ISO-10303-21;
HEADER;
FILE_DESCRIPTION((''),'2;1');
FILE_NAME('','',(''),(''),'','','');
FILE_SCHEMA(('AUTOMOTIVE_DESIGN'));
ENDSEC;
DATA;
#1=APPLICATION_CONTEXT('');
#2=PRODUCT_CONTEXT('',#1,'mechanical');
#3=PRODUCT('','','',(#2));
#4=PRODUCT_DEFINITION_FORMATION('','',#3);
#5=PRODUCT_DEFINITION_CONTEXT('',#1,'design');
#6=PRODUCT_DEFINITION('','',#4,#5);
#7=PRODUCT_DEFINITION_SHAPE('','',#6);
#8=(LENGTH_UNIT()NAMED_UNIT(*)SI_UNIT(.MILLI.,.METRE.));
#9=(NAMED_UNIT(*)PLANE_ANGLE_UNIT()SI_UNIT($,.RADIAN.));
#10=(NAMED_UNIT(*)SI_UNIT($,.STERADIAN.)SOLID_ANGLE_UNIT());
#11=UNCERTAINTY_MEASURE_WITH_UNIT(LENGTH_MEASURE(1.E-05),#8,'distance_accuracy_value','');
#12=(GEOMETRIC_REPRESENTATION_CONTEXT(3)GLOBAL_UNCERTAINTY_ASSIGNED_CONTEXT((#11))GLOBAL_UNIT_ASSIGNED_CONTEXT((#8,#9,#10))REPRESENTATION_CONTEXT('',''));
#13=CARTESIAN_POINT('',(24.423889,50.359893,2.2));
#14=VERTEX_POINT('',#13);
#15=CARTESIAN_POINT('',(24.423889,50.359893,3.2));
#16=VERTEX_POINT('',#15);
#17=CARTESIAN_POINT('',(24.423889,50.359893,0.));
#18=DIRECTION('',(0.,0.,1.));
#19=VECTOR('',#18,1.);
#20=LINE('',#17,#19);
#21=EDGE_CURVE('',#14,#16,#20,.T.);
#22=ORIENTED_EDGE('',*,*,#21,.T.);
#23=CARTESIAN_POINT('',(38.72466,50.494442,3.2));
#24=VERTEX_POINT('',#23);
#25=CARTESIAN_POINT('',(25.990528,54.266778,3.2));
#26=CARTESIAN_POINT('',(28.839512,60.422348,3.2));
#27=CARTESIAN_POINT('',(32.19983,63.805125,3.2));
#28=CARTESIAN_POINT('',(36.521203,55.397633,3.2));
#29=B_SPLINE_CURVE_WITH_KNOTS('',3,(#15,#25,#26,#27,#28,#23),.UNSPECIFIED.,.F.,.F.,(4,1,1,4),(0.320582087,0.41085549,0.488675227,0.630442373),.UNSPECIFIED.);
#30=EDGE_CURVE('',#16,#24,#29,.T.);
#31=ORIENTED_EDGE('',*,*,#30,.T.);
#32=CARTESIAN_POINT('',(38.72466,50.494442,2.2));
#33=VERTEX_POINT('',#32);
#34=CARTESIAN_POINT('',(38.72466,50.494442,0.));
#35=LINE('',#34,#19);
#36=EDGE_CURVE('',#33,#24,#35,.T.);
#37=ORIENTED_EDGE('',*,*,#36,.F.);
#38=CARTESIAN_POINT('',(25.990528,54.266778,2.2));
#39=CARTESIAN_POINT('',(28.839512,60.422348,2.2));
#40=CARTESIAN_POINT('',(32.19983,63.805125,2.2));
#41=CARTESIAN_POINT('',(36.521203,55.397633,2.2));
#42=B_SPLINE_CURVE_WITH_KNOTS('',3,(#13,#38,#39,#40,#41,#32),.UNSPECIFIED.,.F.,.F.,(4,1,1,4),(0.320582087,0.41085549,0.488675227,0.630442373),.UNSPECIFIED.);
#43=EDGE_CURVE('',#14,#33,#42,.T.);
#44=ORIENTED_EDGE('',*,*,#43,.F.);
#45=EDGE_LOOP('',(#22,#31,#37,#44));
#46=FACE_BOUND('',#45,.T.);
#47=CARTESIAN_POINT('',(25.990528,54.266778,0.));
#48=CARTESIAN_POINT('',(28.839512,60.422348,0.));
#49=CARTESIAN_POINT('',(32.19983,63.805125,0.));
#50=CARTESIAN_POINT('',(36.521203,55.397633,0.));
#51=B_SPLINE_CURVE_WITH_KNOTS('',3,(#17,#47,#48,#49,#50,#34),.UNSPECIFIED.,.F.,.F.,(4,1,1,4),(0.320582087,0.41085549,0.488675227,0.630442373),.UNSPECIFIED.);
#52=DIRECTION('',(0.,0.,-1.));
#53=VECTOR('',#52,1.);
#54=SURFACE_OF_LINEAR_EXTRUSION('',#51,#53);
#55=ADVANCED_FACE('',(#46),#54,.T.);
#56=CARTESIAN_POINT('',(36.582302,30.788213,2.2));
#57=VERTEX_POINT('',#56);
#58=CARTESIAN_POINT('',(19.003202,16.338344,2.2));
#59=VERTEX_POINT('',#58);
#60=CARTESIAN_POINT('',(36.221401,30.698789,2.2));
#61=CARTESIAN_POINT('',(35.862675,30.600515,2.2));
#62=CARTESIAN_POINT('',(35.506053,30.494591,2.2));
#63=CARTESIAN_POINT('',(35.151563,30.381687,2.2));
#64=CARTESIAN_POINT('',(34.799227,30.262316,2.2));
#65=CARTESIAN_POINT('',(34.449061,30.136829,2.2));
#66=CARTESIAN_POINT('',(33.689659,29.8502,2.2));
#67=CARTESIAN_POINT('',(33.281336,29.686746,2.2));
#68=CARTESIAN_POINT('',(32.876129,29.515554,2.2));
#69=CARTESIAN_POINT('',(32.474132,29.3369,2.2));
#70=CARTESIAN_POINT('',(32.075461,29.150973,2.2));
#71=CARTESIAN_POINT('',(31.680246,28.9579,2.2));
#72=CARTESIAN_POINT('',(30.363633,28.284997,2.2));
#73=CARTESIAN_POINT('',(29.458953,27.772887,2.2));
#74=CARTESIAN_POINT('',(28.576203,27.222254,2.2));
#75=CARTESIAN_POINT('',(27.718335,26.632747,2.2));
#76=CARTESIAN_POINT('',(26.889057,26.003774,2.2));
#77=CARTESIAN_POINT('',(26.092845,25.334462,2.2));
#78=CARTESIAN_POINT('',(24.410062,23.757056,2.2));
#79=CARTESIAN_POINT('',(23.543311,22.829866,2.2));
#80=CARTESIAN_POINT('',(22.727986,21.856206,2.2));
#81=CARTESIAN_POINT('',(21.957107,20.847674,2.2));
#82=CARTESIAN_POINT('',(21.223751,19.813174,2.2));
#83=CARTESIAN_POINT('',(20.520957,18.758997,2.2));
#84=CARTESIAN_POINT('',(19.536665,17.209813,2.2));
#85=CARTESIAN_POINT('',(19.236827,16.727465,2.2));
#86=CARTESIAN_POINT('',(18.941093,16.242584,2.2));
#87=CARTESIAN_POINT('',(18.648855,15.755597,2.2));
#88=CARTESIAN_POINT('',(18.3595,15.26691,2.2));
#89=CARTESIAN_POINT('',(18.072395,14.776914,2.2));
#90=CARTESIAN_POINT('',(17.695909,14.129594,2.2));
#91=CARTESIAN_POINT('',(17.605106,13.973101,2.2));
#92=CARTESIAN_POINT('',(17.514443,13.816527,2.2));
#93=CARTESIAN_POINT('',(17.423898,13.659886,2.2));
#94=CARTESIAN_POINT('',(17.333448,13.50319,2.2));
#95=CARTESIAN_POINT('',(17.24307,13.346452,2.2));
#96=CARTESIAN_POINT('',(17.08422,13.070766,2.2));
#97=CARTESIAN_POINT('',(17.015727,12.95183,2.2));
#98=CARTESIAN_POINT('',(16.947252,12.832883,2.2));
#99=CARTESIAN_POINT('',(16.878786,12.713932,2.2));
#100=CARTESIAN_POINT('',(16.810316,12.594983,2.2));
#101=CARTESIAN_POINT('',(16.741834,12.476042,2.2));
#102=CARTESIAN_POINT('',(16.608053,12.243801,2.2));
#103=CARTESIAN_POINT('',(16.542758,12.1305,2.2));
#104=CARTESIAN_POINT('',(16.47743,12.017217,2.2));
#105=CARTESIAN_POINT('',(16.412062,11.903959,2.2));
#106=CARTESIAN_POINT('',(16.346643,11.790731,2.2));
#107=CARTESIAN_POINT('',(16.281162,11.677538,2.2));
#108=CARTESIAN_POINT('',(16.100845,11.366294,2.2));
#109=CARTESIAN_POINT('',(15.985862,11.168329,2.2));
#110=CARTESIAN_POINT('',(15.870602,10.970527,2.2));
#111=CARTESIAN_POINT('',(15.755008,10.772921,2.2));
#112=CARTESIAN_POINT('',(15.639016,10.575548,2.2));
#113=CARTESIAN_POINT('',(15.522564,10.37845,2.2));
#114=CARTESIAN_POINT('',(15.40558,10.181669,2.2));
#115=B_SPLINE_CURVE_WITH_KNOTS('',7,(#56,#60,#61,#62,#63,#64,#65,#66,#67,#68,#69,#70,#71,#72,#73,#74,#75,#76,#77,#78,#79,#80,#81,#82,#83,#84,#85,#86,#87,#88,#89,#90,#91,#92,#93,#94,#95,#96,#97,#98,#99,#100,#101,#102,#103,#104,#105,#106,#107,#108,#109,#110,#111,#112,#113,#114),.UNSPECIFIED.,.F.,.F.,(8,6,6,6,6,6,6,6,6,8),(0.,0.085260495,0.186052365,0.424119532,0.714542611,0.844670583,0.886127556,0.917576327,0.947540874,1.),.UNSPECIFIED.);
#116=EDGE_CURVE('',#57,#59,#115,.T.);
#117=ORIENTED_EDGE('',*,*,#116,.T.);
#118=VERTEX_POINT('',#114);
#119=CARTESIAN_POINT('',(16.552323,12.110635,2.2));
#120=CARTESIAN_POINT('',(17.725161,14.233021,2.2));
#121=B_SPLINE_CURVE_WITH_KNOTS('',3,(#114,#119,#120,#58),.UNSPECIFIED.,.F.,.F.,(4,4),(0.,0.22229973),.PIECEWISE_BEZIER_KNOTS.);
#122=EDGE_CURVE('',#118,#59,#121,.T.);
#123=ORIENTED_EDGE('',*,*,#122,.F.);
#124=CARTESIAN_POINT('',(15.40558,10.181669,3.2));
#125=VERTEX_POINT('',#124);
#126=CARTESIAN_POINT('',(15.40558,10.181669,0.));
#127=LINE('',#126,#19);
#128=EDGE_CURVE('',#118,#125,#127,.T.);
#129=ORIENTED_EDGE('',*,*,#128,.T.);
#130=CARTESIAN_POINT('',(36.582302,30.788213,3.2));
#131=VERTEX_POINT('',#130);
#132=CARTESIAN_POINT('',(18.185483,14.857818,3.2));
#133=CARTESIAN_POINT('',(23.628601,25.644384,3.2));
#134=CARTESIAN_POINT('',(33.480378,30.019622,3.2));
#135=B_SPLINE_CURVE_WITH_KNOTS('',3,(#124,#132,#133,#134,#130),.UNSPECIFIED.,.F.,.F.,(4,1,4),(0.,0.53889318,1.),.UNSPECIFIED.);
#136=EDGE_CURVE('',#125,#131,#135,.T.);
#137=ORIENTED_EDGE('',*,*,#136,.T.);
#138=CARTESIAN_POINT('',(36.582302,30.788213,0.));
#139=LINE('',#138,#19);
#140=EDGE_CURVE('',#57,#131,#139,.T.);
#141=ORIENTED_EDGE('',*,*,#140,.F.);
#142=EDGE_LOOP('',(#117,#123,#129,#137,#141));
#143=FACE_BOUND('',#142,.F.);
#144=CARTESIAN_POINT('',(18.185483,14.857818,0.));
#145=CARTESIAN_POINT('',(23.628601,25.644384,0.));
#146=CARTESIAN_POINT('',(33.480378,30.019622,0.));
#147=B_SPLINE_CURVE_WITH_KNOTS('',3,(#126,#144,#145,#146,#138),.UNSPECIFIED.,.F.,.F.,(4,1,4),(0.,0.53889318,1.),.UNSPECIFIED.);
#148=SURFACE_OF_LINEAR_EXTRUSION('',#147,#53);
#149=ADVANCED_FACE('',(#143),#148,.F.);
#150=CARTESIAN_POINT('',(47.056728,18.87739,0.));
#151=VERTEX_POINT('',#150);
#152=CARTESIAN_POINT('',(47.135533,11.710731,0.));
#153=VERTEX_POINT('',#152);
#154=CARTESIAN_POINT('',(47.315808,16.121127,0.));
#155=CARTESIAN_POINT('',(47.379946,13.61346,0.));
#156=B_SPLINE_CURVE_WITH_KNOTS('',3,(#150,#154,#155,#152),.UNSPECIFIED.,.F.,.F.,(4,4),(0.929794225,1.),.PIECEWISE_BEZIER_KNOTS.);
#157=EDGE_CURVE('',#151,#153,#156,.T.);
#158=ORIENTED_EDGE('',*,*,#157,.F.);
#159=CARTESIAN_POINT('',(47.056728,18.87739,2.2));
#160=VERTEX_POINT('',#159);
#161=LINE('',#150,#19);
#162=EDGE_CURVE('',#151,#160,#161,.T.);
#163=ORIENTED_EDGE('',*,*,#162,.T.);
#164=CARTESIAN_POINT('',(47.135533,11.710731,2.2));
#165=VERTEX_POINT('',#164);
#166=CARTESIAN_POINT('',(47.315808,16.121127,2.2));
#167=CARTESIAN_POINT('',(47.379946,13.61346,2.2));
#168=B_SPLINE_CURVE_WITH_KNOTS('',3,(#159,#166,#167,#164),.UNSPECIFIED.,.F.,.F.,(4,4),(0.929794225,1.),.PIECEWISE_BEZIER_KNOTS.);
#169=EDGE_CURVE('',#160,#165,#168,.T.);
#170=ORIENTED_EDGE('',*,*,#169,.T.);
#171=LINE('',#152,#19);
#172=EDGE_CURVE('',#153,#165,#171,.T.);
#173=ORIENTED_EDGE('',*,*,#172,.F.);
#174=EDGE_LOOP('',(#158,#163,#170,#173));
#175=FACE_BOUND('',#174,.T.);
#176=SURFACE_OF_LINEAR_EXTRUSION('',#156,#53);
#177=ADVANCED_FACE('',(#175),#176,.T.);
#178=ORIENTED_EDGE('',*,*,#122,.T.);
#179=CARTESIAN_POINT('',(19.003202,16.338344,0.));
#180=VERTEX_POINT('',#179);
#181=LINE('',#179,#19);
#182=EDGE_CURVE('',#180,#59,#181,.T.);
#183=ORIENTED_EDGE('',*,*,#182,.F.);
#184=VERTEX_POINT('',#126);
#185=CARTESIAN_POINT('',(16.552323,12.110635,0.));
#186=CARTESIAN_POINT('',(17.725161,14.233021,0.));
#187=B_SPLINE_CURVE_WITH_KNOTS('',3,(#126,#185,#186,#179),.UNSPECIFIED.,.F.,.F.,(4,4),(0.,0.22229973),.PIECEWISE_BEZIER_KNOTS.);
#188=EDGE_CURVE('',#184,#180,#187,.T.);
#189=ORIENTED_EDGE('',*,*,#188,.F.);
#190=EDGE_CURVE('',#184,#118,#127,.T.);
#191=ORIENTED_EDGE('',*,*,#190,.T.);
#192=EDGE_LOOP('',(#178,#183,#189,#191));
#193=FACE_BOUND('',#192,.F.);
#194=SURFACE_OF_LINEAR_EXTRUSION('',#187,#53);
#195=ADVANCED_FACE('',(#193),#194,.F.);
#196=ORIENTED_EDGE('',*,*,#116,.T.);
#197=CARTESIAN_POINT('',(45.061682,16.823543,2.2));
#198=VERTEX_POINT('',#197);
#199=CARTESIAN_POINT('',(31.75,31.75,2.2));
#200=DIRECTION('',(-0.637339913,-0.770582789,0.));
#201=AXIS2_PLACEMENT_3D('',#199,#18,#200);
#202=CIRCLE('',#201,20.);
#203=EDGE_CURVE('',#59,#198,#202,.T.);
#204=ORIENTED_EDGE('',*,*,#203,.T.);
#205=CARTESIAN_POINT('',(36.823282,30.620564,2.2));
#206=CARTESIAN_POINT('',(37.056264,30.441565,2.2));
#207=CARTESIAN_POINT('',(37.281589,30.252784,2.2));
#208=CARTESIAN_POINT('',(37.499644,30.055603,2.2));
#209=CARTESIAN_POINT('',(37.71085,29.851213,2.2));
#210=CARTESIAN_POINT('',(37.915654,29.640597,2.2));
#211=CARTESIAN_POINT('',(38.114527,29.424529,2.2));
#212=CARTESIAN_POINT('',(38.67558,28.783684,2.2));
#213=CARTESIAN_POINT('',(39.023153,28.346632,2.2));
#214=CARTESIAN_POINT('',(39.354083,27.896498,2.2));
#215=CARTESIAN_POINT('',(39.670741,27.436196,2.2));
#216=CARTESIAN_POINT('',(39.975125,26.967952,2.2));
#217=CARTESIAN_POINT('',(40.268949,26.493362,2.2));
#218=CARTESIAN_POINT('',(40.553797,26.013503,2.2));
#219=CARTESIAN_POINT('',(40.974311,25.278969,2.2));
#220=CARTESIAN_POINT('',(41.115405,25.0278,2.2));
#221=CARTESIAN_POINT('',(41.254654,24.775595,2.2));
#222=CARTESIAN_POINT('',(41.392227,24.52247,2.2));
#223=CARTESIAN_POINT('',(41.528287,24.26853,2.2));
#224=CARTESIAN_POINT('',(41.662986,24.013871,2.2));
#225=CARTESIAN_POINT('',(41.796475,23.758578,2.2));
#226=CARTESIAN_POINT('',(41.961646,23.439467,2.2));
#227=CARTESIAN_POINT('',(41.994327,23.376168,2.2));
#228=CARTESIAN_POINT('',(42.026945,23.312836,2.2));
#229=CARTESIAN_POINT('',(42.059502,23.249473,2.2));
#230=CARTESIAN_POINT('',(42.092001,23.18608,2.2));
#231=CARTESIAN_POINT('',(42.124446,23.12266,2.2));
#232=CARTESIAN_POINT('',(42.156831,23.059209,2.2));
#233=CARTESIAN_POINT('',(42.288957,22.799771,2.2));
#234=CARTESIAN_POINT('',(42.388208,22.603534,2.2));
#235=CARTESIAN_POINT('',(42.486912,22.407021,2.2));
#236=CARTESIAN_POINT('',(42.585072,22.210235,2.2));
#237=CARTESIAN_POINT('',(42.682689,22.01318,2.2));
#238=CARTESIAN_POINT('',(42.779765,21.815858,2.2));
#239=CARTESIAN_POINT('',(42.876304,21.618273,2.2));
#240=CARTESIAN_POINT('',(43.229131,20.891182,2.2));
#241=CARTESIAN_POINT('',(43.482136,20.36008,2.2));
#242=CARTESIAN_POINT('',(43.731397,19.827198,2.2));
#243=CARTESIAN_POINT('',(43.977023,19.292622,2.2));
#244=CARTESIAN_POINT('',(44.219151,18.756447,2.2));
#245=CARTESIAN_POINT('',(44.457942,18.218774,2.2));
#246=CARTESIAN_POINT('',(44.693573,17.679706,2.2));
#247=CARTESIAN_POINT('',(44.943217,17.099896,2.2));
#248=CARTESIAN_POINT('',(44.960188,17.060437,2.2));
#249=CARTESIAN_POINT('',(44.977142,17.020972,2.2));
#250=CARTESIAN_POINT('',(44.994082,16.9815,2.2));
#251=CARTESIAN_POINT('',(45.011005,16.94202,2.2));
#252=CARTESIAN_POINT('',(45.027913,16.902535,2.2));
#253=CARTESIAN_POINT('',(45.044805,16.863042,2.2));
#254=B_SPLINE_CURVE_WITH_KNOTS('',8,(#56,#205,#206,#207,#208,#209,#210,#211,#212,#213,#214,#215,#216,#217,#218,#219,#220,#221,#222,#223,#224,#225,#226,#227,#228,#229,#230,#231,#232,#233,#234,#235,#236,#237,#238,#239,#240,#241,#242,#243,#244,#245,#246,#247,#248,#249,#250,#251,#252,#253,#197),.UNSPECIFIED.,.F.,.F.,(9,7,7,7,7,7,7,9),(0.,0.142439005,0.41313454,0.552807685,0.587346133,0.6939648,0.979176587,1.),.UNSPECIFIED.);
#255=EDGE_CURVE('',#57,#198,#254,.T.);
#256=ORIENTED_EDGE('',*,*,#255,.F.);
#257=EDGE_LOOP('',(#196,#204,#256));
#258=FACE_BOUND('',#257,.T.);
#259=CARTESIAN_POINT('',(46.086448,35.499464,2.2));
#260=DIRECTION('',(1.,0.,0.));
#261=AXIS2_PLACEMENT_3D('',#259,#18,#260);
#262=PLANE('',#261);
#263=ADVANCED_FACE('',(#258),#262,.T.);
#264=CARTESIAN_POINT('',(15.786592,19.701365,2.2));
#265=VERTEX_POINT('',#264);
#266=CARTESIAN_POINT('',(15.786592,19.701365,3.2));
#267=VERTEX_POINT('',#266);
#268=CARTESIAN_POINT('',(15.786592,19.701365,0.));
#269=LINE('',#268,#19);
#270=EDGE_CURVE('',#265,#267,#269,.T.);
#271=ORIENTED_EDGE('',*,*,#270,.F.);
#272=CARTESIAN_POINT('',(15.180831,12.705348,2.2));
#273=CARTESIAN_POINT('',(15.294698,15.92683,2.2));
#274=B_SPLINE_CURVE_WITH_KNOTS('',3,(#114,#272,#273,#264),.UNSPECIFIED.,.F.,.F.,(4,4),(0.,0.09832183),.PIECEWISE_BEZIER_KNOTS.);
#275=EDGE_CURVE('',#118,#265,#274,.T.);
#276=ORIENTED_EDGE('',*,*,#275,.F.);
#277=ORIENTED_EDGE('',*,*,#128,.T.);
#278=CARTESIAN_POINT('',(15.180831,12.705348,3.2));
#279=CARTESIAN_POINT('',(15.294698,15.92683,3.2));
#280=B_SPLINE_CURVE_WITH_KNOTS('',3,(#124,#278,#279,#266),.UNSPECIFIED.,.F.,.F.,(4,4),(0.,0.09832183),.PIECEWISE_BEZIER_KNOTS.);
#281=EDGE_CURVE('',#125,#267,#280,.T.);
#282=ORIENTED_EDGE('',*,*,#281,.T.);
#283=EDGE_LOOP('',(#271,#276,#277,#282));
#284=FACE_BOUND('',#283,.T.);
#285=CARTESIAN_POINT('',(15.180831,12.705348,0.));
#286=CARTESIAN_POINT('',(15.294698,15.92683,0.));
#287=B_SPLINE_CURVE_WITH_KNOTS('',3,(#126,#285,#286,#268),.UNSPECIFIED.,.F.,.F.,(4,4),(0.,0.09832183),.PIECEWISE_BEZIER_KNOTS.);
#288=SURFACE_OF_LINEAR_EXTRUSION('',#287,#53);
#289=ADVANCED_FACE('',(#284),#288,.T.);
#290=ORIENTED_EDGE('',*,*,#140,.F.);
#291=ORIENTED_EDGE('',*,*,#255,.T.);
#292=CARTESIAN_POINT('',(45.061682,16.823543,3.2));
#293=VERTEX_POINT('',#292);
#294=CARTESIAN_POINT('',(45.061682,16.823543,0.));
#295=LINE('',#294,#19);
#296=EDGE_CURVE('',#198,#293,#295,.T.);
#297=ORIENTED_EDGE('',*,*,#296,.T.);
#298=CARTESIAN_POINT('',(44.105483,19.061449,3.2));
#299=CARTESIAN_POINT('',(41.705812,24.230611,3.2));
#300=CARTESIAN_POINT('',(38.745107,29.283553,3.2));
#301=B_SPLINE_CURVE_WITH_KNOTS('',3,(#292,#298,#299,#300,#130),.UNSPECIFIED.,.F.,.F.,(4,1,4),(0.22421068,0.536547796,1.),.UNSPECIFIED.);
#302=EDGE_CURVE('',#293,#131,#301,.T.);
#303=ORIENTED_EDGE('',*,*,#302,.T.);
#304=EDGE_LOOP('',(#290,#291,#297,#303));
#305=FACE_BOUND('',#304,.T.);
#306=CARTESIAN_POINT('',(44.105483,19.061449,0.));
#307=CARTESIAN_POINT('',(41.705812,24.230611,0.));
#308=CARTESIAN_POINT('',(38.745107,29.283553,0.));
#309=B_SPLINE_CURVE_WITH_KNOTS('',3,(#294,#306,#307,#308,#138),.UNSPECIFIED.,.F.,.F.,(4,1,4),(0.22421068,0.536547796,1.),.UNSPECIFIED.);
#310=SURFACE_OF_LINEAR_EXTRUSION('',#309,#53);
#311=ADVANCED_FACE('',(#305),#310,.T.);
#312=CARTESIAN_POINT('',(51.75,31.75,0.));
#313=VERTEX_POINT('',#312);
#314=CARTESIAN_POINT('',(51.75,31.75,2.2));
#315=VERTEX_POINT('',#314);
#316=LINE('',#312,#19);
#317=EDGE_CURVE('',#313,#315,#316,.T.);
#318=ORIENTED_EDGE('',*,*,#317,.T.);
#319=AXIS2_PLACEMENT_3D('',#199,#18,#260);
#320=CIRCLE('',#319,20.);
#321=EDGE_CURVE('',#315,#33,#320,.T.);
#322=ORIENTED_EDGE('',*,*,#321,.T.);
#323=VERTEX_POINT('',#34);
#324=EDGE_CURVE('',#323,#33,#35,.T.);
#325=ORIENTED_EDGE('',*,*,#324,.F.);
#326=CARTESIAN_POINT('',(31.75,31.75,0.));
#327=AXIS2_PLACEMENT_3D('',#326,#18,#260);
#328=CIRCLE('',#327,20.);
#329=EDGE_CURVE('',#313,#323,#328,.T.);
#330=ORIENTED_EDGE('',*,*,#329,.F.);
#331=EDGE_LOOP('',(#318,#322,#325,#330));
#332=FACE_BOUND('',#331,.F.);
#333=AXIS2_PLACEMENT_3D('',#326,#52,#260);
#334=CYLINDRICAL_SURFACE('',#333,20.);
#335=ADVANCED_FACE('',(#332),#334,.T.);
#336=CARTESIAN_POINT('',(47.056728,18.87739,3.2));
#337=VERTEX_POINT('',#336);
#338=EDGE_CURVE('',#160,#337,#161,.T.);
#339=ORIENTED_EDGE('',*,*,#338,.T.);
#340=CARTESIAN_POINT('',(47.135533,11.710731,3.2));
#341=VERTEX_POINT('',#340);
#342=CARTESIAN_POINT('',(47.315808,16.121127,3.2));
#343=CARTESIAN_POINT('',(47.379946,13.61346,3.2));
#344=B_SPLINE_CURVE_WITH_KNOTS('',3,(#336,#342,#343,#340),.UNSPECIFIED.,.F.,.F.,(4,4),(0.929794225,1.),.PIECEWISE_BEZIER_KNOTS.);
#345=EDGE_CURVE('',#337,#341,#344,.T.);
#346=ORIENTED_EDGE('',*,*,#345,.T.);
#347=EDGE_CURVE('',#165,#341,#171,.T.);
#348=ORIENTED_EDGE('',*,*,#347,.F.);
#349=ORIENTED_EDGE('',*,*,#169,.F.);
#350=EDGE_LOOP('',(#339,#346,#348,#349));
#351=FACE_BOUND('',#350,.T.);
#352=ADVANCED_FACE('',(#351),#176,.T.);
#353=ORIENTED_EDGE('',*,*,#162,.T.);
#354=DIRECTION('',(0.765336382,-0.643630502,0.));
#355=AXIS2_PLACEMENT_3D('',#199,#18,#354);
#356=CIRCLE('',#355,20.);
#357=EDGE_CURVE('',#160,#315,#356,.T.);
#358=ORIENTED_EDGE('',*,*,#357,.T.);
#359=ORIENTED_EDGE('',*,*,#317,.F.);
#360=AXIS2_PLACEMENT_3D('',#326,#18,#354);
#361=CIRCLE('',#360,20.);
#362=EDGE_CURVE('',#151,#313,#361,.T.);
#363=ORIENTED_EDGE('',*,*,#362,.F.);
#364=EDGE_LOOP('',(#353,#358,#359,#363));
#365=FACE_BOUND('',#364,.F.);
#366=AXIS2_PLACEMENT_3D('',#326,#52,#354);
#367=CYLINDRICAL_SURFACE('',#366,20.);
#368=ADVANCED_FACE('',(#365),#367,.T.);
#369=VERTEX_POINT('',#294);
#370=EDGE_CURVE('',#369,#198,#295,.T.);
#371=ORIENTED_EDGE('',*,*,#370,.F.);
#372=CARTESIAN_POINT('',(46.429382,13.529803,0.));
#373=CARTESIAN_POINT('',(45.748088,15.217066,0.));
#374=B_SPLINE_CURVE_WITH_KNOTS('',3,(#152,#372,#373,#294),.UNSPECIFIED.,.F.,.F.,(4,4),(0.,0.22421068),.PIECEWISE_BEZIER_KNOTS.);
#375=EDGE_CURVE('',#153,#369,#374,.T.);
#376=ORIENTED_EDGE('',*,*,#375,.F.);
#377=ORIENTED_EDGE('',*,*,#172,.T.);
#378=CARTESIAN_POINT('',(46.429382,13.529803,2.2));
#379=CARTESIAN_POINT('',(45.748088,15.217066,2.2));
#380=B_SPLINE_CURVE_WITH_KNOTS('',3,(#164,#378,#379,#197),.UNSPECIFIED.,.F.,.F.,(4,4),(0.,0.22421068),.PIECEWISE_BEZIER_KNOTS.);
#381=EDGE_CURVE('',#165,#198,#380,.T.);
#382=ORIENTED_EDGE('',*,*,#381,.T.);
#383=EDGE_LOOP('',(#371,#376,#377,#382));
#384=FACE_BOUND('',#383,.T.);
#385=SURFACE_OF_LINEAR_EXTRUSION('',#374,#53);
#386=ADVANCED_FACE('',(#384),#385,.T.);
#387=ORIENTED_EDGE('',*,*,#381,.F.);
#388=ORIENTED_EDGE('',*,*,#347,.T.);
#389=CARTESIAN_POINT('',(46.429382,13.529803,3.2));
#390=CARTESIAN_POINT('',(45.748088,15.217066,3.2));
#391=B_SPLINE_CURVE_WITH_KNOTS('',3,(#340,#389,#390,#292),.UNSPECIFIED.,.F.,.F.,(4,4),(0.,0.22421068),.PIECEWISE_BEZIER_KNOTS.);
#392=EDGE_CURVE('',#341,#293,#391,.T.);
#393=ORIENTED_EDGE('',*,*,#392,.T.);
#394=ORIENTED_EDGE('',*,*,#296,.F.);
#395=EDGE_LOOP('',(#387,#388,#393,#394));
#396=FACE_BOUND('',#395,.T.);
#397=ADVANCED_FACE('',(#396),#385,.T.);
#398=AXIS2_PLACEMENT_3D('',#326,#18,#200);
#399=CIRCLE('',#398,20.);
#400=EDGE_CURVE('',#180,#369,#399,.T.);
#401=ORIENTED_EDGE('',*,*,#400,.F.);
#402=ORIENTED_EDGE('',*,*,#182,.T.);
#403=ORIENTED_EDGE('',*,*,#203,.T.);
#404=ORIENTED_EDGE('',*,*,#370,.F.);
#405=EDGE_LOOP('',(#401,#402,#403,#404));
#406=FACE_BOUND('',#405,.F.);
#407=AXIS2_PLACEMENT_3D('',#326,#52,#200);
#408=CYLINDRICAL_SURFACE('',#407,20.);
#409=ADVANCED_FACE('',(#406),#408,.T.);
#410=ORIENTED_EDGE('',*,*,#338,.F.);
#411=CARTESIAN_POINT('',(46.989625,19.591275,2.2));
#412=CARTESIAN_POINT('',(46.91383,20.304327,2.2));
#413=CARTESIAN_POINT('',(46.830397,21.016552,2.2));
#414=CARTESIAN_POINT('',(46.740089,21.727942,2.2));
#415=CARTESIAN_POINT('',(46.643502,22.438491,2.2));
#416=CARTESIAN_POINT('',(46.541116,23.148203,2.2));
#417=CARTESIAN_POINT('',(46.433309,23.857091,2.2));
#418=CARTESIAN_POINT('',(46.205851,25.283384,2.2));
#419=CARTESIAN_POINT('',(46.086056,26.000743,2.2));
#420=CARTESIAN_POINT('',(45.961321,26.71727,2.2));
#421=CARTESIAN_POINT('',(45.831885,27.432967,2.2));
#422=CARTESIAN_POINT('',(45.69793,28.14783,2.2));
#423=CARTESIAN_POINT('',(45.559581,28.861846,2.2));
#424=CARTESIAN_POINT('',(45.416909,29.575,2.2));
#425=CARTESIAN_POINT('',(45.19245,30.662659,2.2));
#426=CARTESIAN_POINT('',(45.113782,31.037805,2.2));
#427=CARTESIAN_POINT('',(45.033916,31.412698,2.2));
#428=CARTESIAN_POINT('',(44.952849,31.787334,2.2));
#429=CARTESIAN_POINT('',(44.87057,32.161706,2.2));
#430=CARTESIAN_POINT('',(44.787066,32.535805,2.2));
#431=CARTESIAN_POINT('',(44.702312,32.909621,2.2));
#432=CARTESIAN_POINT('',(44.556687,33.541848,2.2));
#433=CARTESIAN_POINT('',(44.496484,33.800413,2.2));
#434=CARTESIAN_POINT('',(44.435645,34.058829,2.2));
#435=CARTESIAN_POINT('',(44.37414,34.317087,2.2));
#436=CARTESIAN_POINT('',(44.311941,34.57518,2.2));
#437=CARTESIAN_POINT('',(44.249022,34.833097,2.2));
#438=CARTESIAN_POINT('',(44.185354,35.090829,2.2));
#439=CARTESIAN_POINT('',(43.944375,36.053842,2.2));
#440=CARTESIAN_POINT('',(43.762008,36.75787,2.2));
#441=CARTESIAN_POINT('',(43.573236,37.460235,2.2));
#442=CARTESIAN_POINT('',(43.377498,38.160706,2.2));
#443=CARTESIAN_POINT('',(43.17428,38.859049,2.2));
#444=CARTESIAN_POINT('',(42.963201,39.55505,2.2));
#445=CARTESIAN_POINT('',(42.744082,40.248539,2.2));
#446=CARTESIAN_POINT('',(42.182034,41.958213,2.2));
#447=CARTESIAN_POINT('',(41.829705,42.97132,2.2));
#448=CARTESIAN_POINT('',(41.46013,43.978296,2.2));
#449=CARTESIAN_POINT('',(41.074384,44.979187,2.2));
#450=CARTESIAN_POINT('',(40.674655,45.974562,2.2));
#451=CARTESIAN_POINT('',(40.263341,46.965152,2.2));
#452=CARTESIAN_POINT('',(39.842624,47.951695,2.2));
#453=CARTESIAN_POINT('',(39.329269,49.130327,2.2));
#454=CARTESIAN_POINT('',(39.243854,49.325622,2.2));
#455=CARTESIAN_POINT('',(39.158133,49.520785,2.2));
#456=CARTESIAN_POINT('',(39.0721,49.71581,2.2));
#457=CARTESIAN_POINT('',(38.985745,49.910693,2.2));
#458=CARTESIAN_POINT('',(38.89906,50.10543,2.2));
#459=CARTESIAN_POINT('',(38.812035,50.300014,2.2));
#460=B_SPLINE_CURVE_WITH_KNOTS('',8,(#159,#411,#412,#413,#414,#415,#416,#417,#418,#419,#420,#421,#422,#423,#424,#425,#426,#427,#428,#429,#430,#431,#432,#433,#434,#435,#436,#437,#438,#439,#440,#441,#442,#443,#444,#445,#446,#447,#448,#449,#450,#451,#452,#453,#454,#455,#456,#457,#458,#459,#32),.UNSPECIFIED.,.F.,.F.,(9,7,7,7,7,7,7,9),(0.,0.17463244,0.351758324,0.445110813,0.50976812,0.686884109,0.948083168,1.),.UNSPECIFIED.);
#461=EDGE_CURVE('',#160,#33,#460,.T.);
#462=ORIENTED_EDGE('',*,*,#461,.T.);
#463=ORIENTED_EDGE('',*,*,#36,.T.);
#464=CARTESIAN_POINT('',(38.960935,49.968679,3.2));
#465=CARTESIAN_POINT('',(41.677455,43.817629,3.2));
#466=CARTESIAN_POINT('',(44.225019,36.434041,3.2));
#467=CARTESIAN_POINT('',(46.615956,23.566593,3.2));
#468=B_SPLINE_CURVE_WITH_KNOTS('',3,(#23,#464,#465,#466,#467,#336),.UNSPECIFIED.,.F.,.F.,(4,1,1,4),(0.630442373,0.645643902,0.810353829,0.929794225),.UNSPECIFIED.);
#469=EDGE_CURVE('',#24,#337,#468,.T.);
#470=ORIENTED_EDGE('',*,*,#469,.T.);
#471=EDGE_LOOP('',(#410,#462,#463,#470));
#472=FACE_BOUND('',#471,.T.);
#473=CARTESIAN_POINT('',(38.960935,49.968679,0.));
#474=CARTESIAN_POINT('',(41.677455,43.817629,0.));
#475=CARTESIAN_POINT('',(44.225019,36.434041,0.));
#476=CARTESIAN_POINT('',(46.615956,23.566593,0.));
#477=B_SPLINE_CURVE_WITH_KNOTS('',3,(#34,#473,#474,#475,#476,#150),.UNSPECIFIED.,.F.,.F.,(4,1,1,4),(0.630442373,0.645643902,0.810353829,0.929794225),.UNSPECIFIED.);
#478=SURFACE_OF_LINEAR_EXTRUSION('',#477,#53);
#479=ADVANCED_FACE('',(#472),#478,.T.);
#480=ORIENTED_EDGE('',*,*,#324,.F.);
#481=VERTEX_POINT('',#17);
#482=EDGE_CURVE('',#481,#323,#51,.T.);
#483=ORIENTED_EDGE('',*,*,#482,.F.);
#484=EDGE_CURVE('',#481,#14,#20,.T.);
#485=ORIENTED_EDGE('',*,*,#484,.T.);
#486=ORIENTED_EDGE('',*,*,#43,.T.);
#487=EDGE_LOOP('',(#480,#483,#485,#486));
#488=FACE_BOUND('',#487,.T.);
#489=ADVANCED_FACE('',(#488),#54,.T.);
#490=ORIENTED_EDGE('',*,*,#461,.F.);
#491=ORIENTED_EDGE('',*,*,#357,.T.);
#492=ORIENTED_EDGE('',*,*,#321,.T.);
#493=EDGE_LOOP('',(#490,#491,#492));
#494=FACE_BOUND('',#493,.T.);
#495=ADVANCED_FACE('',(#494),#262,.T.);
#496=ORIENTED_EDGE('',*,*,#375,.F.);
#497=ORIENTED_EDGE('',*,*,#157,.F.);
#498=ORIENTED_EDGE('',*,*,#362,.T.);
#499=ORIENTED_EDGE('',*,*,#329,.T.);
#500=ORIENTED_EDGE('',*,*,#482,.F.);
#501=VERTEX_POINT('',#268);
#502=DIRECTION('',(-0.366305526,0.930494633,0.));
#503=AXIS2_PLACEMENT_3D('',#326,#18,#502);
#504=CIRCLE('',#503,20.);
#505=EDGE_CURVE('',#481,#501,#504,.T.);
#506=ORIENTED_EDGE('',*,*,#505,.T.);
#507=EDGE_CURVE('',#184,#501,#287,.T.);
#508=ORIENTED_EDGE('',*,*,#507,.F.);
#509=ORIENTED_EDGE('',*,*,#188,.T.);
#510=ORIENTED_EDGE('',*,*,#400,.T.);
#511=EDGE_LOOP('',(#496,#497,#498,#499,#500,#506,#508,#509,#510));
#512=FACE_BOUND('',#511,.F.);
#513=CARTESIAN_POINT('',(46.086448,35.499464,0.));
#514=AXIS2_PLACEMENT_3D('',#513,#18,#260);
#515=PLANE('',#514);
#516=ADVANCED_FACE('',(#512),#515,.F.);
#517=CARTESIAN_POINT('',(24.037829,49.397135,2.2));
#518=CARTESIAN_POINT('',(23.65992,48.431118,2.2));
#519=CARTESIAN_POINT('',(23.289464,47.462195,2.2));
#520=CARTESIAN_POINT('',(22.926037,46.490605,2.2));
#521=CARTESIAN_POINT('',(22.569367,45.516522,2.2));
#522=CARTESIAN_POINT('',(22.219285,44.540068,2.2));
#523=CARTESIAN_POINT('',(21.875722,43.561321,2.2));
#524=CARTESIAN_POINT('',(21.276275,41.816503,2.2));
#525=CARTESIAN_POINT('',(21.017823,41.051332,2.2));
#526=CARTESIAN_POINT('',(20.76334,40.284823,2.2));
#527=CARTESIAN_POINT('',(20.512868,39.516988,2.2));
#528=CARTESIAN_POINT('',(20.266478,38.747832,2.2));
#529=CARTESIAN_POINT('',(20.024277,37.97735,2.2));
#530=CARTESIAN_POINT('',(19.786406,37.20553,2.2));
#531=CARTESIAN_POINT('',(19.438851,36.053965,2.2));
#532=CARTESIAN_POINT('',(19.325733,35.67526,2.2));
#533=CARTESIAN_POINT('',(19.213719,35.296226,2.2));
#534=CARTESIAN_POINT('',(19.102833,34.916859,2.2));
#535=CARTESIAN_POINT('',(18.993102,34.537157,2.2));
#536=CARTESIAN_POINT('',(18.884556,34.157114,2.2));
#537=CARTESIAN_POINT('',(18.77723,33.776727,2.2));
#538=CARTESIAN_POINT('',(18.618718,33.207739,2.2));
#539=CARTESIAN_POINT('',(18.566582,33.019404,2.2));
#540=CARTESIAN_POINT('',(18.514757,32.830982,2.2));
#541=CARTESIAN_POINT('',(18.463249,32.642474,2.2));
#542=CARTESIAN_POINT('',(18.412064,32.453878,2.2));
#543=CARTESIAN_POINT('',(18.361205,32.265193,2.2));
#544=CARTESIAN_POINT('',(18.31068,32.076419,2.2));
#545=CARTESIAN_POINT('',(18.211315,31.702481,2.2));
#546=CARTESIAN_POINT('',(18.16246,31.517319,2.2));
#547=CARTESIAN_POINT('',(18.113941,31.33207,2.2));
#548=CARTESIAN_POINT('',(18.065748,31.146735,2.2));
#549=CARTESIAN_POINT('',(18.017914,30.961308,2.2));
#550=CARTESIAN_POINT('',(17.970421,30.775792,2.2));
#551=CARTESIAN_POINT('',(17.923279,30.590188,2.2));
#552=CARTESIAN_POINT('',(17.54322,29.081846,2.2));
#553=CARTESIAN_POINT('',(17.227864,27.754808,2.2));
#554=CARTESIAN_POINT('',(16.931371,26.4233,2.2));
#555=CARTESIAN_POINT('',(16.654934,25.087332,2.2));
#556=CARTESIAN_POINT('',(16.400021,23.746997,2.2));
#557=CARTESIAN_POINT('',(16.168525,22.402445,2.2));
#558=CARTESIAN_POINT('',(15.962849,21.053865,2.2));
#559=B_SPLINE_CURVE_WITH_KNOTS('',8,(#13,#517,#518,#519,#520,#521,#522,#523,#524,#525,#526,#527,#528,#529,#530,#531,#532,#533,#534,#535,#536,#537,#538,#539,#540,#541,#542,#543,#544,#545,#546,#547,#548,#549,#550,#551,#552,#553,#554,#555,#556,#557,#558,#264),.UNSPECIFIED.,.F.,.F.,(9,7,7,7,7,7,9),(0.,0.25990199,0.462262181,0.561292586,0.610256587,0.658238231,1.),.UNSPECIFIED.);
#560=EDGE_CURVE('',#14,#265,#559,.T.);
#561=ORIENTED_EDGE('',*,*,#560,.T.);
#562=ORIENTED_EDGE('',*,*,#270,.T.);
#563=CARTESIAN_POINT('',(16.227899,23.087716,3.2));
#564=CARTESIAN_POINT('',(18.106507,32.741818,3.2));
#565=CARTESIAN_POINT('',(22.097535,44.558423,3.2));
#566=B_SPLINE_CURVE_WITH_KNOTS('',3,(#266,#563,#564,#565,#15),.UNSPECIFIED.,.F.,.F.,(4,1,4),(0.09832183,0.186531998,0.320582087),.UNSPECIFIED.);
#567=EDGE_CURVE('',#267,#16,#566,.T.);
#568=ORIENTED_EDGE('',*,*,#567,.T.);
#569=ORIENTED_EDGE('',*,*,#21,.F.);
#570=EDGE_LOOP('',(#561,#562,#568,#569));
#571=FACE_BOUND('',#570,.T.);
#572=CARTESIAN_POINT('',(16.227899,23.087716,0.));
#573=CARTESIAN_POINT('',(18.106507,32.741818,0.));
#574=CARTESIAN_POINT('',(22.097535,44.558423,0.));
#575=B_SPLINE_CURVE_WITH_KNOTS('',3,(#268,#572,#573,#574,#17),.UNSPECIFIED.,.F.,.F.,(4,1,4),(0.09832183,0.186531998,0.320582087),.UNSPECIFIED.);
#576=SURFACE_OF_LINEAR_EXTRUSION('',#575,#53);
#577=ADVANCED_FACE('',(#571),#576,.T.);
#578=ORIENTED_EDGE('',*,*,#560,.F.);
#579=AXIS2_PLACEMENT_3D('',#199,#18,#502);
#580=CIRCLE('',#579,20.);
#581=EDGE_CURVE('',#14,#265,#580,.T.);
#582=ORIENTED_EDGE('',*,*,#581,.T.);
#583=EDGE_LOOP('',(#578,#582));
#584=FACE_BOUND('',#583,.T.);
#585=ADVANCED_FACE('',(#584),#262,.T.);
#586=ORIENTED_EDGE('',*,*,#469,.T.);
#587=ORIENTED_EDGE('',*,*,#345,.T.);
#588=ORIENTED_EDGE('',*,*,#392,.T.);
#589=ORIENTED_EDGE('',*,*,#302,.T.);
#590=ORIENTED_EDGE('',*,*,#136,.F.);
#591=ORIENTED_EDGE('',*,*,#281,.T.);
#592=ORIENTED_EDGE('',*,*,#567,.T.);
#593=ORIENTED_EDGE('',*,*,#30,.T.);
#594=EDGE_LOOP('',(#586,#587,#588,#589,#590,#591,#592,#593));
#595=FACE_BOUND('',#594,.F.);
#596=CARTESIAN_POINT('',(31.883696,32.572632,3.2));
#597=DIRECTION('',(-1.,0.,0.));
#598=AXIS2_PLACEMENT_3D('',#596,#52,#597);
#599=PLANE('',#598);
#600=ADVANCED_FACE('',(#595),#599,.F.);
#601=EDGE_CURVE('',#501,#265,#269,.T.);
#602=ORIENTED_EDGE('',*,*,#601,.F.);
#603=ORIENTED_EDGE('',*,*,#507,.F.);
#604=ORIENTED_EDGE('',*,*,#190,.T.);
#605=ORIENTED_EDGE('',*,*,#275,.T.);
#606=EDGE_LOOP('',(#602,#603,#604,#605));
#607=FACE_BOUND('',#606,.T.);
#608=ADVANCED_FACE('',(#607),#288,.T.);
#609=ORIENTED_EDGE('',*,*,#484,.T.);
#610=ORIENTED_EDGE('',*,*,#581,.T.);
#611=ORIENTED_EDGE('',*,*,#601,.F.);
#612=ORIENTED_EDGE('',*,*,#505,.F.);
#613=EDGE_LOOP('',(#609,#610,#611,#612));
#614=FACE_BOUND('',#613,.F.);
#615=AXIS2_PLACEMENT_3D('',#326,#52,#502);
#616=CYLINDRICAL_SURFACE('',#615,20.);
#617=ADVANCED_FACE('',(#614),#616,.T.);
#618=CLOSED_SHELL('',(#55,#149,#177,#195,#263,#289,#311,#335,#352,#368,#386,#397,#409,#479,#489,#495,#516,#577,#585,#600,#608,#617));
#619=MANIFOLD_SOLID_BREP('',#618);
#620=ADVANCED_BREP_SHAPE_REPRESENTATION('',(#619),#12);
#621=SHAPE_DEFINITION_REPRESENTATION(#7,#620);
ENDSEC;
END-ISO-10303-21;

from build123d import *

# Parameters (mm, degrees)
F1_DEPTH = 2.2
F2_DEPTH = 3.2


with BuildPart() as f1:
    # F0 (on Top) → F1 (new body)
    with BuildSketch(Plane.XY):
        with BuildLine():
            ThreePointArc((47.0567276318, 18.8773899614), (50.5400845213, 24.8992537865), (51.75, 31.75))
            ThreePointArc((51.75, 31.75), (48.1739643306, 43.1628609764), (38.7246604334, 50.4944421586))
            add(Edge.make_bspline(
                [(38.7246604334, 50.4944421586), (38.9609346181, 49.9686786288), (41.6774554399, 43.8176291657), (44.2250191929, 36.4340414246), (46.6159564174, 23.5665925252), (47.0567276318, 18.8773899614)],
                knots=[0.630442373, 0.630442373, 0.630442373, 0.630442373, 0.6456439018, 0.8103538291, 0.929794225, 0.929794225, 0.929794225, 0.929794225], degree=3))
        make_face()
        with BuildLine():
            add(Edge.make_bspline(
                [(38.7246604334, 50.4944421586), (38.9609346181, 49.9686786288), (41.6774554399, 43.8176291657), (44.2250191929, 36.4340414246), (46.6159564174, 23.5665925252), (47.0567276318, 18.8773899614)],
                knots=[0.630442373, 0.630442373, 0.630442373, 0.630442373, 0.6456439018, 0.8103538291, 0.929794225, 0.929794225, 0.929794225, 0.929794225], degree=3))
            ThreePointArc((38.7246604334, 50.4944421586), (31.5618373499, 51.7491148508), (24.4238894806, 50.3598926557))
            add(Edge.make_bspline(
                [(15.7865923671, 19.7013645276), (16.2278990367, 23.0877163293), (18.1065072741, 32.7418176771), (22.097534659, 44.5584231861), (24.4238894806, 50.3598926557)],
                knots=[0.0983218299, 0.0983218299, 0.0983218299, 0.0983218299, 0.1865319985, 0.3205820871, 0.3205820871, 0.3205820871, 0.3205820871], degree=3))
            ThreePointArc((15.7865923672, 19.7013645276), (17.2967492534, 17.9259794974), (19.0032017299, 16.3383442206))
            add(Edge.make_bspline(
                [(19.0032017299, 16.3383442206), (20.8233538612, 19.3366897096), (25.818648602, 26.6169979909), (33.4803777859, 30.0196222141), (36.5823023021, 30.7882130146)],
                knots=[0.2222997297, 0.2222997297, 0.2222997297, 0.2222997297, 0.5388931801, 1, 1, 1, 1], degree=3))
            add(Edge.make_bspline(
                [(45.0616821781, 16.8235430329), (44.1054826127, 19.0614489649), (41.7058120017, 24.2306114406), (38.7451071997, 29.2835529549), (36.5823023021, 30.7882130146)],
                knots=[0.2242106798, 0.2242106798, 0.2242106798, 0.2242106798, 0.5365477963, 1, 1, 1, 1], degree=3))
            ThreePointArc((45.0616821781, 16.8235430329), (46.0960069989, 17.8147180442), (47.0567276318, 18.8773899614))
        make_face()
        with BuildLine():
            ThreePointArc((24.4238894806, 50.3598926557), (31.5618373499, 51.7491148508), (38.7246604334, 50.4944421586))
            add(Edge.make_bspline(
                [(24.4238894806, 50.3598926557), (25.9905275085, 54.2667784859), (28.8395118431, 60.4223481909), (32.1998298153, 63.8051247243), (36.5212033159, 55.3976328882), (38.7246604334, 50.4944421586)],
                knots=[0.3205820871, 0.3205820871, 0.3205820871, 0.3205820871, 0.4108554902, 0.4886752267, 0.630442373, 0.630442373, 0.630442373, 0.630442373], degree=3))
        make_face()
        with BuildLine():
            add(Edge.make_bspline(
                [(47.0567276318, 18.8773899614), (47.3158081923, 16.1211273275), (47.379945731, 13.6134596383), (47.1355328849, 11.710731416)],
                knots=[0.929794225, 0.929794225, 0.929794225, 0.929794225, 1, 1, 1, 1], degree=3))
            ThreePointArc((47.0567276318, 18.8773899614), (46.0960069989, 17.8147180442), (45.0616821781, 16.8235430329))
            add(Edge.make_bspline(
                [(47.1355328849, 11.710731416), (46.4293822406, 13.5298032206), (45.7480884465, 15.2170659798), (45.0616821781, 16.8235430329)],
                knots=[0, 0, 0, 0, 0.2242106798, 0.2242106798, 0.2242106798, 0.2242106798], degree=3))
        make_face()
        with BuildLine():
            add(Edge.make_bspline(
                [(15.7865923671, 19.7013645276), (16.2278990367, 23.0877163293), (18.1065072741, 32.7418176771), (22.097534659, 44.5584231861), (24.4238894806, 50.3598926557)],
                knots=[0.0983218299, 0.0983218299, 0.0983218299, 0.0983218299, 0.1865319985, 0.3205820871, 0.3205820871, 0.3205820871, 0.3205820871], degree=3))
            ThreePointArc((24.4238894806, 50.3598926557), (12.4993701223, 37.1733983178), (15.7865923672, 19.7013645276))
        make_face()
        with BuildLine():
            ThreePointArc((19.0032017299, 16.3383442206), (32.1223277175, 11.7534659986), (45.0616821781, 16.8235430329))
            add(Edge.make_bspline(
                [(45.0616821781, 16.8235430329), (44.1054826127, 19.0614489649), (41.7058120017, 24.2306114406), (38.7451071997, 29.2835529549), (36.5823023021, 30.7882130146)],
                knots=[0.2242106798, 0.2242106798, 0.2242106798, 0.2242106798, 0.5365477963, 1, 1, 1, 1], degree=3))
            add(Edge.make_bspline(
                [(19.0032017299, 16.3383442206), (20.8233538612, 19.3366897096), (25.818648602, 26.6169979909), (33.4803777859, 30.0196222141), (36.5823023021, 30.7882130146)],
                knots=[0.2222997297, 0.2222997297, 0.2222997297, 0.2222997297, 0.5388931801, 1, 1, 1, 1], degree=3))
        make_face()
        with BuildLine():
            ThreePointArc((19.0032017299, 16.3383442206), (17.2967492534, 17.9259794974), (15.7865923672, 19.7013645276))
            add(Edge.make_bspline(
                [(15.4055802766, 10.1816686965), (15.180831424, 12.7053480538), (15.2946980654, 15.9268302417), (15.7865923671, 19.7013645276)],
                knots=[0, 0, 0, 0, 0.0983218299, 0.0983218299, 0.0983218299, 0.0983218299], degree=3))
            add(Edge.make_bspline(
                [(15.4055802766, 10.1816686965), (16.5523225946, 12.1106349554), (17.7251609925, 14.2330214765), (19.0032017299, 16.3383442206)],
                knots=[0, 0, 0, 0, 0.2222997297, 0.2222997297, 0.2222997297, 0.2222997297], degree=3))
        make_face()
    extrude(amount=F1_DEPTH)

    # F0 (on Top) → F2 (join)
    with BuildSketch(Plane.XY):
        with BuildLine():
            add(Edge.make_bspline(
                [(38.7246604334, 50.4944421586), (38.9609346181, 49.9686786288), (41.6774554399, 43.8176291657), (44.2250191929, 36.4340414246), (46.6159564174, 23.5665925252), (47.0567276318, 18.8773899614)],
                knots=[0.630442373, 0.630442373, 0.630442373, 0.630442373, 0.6456439018, 0.8103538291, 0.929794225, 0.929794225, 0.929794225, 0.929794225], degree=3))
            ThreePointArc((38.7246604334, 50.4944421586), (31.5618373499, 51.7491148508), (24.4238894806, 50.3598926557))
            add(Edge.make_bspline(
                [(15.7865923671, 19.7013645276), (16.2278990367, 23.0877163293), (18.1065072741, 32.7418176771), (22.097534659, 44.5584231861), (24.4238894806, 50.3598926557)],
                knots=[0.0983218299, 0.0983218299, 0.0983218299, 0.0983218299, 0.1865319985, 0.3205820871, 0.3205820871, 0.3205820871, 0.3205820871], degree=3))
            ThreePointArc((15.7865923672, 19.7013645276), (17.2967492534, 17.9259794974), (19.0032017299, 16.3383442206))
            add(Edge.make_bspline(
                [(19.0032017299, 16.3383442206), (20.8233538612, 19.3366897096), (25.818648602, 26.6169979909), (33.4803777859, 30.0196222141), (36.5823023021, 30.7882130146)],
                knots=[0.2222997297, 0.2222997297, 0.2222997297, 0.2222997297, 0.5388931801, 1, 1, 1, 1], degree=3))
            add(Edge.make_bspline(
                [(45.0616821781, 16.8235430329), (44.1054826127, 19.0614489649), (41.7058120017, 24.2306114406), (38.7451071997, 29.2835529549), (36.5823023021, 30.7882130146)],
                knots=[0.2242106798, 0.2242106798, 0.2242106798, 0.2242106798, 0.5365477963, 1, 1, 1, 1], degree=3))
            ThreePointArc((45.0616821781, 16.8235430329), (46.0960069989, 17.8147180442), (47.0567276318, 18.8773899614))
        make_face()
        with BuildLine():
            ThreePointArc((24.4238894806, 50.3598926557), (31.5618373499, 51.7491148508), (38.7246604334, 50.4944421586))
            add(Edge.make_bspline(
                [(24.4238894806, 50.3598926557), (25.9905275085, 54.2667784859), (28.8395118431, 60.4223481909), (32.1998298153, 63.8051247243), (36.5212033159, 55.3976328882), (38.7246604334, 50.4944421586)],
                knots=[0.3205820871, 0.3205820871, 0.3205820871, 0.3205820871, 0.4108554902, 0.4886752267, 0.630442373, 0.630442373, 0.630442373, 0.630442373], degree=3))
        make_face()
        with BuildLine():
            add(Edge.make_bspline(
                [(47.0567276318, 18.8773899614), (47.3158081923, 16.1211273275), (47.379945731, 13.6134596383), (47.1355328849, 11.710731416)],
                knots=[0.929794225, 0.929794225, 0.929794225, 0.929794225, 1, 1, 1, 1], degree=3))
            ThreePointArc((47.0567276318, 18.8773899614), (46.0960069989, 17.8147180442), (45.0616821781, 16.8235430329))
            add(Edge.make_bspline(
                [(47.1355328849, 11.710731416), (46.4293822406, 13.5298032206), (45.7480884465, 15.2170659798), (45.0616821781, 16.8235430329)],
                knots=[0, 0, 0, 0, 0.2242106798, 0.2242106798, 0.2242106798, 0.2242106798], degree=3))
        make_face()
        with BuildLine():
            ThreePointArc((19.0032017299, 16.3383442206), (17.2967492534, 17.9259794974), (15.7865923672, 19.7013645276))
            add(Edge.make_bspline(
                [(15.4055802766, 10.1816686965), (15.180831424, 12.7053480538), (15.2946980654, 15.9268302417), (15.7865923671, 19.7013645276)],
                knots=[0, 0, 0, 0, 0.0983218299, 0.0983218299, 0.0983218299, 0.0983218299], degree=3))
            add(Edge.make_bspline(
                [(15.4055802766, 10.1816686965), (16.5523225946, 12.1106349554), (17.7251609925, 14.2330214765), (19.0032017299, 16.3383442206)],
                knots=[0, 0, 0, 0, 0.2222997297, 0.2222997297, 0.2222997297, 0.2222997297], degree=3))
        make_face()
    extrude(amount=F2_DEPTH)


solid = f1.part
